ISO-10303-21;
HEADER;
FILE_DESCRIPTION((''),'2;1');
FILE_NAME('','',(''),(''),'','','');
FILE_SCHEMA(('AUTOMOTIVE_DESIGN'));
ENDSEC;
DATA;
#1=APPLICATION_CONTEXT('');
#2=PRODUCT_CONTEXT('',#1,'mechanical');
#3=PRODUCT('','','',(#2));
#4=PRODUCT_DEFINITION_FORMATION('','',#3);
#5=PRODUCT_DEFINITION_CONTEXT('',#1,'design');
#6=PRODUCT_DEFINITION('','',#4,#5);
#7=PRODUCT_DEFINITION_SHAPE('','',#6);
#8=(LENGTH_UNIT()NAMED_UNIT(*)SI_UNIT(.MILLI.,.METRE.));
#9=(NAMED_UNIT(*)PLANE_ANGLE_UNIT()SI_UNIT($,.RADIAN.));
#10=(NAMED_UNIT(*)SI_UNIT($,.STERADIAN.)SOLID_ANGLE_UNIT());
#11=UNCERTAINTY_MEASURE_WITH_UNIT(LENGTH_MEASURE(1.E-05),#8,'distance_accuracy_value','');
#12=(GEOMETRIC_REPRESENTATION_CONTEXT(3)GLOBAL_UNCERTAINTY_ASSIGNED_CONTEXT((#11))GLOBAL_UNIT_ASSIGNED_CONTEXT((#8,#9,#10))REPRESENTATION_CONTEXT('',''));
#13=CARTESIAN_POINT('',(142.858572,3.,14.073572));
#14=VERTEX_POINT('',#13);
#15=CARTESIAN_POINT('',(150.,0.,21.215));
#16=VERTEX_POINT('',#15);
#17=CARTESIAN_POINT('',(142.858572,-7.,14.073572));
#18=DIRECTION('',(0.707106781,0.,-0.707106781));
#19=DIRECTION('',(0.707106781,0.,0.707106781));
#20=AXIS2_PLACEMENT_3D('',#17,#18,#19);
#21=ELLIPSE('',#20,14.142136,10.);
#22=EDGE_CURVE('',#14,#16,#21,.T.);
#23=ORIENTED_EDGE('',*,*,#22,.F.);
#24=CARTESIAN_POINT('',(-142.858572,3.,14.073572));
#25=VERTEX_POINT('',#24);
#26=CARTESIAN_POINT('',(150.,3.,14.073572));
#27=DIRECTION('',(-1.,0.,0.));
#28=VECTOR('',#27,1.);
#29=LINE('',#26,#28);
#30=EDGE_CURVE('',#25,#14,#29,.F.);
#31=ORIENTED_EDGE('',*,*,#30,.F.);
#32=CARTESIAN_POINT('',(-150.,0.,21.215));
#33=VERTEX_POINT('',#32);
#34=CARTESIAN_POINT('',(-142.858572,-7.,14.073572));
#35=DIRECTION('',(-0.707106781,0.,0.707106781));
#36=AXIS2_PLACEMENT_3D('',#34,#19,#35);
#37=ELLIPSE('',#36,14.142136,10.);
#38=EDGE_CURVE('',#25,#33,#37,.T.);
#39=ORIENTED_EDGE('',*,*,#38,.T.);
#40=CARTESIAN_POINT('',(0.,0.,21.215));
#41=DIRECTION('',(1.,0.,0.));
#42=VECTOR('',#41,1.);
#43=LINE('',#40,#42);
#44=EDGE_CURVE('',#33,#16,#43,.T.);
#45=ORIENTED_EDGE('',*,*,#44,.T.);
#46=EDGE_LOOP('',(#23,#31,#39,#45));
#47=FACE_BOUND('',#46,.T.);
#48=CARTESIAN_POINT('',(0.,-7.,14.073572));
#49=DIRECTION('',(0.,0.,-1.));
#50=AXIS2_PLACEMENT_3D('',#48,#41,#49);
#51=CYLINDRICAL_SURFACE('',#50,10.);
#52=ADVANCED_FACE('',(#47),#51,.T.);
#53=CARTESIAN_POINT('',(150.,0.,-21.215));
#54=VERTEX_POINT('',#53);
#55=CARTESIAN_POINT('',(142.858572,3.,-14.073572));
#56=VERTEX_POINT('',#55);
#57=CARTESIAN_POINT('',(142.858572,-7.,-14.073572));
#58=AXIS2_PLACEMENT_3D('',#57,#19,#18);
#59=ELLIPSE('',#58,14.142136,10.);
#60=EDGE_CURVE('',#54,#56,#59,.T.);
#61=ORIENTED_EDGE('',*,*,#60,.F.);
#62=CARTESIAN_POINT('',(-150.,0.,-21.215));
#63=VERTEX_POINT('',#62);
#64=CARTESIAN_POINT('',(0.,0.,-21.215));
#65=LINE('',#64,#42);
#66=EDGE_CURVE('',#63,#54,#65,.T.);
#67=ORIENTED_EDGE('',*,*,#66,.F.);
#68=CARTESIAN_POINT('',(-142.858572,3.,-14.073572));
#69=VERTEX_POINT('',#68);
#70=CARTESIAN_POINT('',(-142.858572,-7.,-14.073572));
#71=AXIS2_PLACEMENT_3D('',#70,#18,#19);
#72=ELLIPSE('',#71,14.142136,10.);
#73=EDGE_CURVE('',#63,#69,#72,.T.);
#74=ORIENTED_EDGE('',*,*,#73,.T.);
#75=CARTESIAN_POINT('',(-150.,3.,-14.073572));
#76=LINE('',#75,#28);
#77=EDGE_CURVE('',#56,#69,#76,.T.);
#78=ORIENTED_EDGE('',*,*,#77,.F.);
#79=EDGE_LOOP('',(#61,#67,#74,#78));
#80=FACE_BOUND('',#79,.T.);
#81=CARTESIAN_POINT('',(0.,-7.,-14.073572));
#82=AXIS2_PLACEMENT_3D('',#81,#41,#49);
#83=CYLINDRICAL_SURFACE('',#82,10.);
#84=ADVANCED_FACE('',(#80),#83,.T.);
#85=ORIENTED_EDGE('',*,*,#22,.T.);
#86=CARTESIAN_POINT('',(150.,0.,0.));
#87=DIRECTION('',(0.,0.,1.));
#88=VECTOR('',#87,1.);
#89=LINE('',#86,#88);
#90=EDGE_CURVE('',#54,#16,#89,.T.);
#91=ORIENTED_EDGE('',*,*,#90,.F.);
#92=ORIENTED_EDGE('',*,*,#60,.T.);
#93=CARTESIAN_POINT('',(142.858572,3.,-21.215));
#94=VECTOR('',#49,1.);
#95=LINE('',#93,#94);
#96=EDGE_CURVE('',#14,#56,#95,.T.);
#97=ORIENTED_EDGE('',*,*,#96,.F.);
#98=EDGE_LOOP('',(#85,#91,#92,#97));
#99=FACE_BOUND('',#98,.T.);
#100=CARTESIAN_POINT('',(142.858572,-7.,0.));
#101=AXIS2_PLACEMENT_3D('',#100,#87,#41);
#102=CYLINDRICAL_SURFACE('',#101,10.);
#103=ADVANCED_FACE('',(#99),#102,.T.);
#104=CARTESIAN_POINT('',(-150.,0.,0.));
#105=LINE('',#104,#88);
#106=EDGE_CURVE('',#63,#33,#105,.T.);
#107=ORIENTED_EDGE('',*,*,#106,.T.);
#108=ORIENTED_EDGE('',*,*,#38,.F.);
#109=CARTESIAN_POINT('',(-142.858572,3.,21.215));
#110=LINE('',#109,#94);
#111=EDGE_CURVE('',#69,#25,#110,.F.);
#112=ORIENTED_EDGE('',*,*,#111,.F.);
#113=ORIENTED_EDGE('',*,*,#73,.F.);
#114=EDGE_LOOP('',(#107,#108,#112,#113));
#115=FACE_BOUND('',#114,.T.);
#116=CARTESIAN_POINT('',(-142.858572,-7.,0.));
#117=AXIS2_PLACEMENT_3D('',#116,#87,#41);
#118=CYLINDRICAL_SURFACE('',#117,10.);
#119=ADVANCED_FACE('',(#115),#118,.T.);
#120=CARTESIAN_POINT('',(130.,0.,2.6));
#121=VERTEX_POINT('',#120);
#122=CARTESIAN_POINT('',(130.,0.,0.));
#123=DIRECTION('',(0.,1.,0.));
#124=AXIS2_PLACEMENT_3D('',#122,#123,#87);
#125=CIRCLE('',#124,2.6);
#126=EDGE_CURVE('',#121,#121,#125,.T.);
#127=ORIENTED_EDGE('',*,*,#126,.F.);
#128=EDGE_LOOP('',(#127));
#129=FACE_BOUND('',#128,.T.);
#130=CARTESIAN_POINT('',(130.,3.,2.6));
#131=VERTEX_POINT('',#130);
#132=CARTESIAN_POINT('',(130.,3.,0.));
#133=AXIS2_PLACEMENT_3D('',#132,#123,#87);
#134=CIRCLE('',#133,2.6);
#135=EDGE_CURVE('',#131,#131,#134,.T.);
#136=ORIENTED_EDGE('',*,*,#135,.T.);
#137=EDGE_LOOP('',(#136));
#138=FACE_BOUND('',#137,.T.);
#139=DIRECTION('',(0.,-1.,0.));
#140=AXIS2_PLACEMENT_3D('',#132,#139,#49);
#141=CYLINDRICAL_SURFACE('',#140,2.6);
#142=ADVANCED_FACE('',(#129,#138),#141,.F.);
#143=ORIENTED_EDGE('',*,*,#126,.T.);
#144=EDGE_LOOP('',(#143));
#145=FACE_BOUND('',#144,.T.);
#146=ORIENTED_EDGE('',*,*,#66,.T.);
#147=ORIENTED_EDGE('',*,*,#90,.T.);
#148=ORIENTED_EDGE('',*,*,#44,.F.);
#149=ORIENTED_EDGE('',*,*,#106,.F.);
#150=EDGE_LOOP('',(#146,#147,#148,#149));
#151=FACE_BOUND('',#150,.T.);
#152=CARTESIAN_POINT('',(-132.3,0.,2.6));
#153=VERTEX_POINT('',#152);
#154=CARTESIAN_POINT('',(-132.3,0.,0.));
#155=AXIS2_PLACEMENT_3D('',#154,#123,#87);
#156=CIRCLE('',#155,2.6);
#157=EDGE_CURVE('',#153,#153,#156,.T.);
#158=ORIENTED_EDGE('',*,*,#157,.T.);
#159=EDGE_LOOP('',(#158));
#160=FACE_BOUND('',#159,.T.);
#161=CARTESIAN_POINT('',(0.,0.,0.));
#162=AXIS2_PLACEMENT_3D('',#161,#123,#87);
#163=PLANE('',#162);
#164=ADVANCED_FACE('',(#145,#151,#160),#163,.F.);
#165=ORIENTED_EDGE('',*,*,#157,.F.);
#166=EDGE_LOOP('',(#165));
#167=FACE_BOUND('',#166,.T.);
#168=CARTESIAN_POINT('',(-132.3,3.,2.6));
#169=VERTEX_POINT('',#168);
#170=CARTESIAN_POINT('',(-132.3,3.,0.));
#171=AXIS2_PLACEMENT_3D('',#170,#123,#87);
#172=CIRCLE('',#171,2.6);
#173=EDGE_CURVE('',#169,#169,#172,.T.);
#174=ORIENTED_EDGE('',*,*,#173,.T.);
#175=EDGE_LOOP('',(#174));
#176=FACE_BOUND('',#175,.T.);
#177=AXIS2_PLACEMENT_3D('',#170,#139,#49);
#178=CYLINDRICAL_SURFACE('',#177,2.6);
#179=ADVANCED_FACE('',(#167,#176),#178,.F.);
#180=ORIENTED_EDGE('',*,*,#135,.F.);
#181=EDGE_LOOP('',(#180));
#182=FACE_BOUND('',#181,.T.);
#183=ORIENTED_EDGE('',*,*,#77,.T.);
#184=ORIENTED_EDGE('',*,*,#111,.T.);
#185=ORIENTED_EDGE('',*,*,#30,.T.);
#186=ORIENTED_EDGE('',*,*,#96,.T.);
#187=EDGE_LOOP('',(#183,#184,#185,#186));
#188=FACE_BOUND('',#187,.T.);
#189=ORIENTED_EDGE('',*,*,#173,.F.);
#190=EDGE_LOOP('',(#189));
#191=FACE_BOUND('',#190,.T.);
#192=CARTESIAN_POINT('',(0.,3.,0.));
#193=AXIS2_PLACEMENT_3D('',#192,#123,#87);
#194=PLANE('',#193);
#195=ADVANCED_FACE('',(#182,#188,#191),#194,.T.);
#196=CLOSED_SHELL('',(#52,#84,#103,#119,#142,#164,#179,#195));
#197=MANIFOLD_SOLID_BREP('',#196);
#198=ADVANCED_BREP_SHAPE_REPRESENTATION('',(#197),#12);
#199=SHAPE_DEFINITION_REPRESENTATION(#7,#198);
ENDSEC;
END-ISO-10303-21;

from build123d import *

# Parameters (mm, degrees)
SKETCH_1_W      = 21
SKETCH_1_H      = 42.43
SKETCH_1_R      = 2.6
EXTRUDE_1_DEPTH = 3
FILLET_1_R      = 10


with BuildPart() as part:
    # 草图1 → 凸台-拉伸1 (new body)
    # profile 1 of 3: a face of its own
    with BuildSketch(Plane(origin=(0, 0, 0), x_dir=(1, 0, 0), z_dir=(0, 1, 0))):
        with Locations((-139.5, 0)):
            Rectangle(SKETCH_1_W, SKETCH_1_H)
        with Locations(Location((-132.3, 0, 0), (0, 0, 270))):
            Circle(SKETCH_1_R, mode=Mode.SUBTRACT)
    # profile 2 of 3: a face of its own
    with BuildSketch(Plane(origin=(0, 0, 0), x_dir=(1, 0, 0), z_dir=(0, 1, 0))):
        with BuildLine():
            Line((129, 21.215), (-129, 21.215))
            Line((-129, 21.215), (-129, -21.215))
            Line((-129, -21.215), (129, -21.215))
            Line((129, -21.215), (129, -2.4))
            ThreePointArc((129, -2.4), (127.4, 0), (129, 2.4))
            Line((129, 2.4), (129, 21.215))
        make_face()
    # profile 3 of 3: a face of its own
    with BuildSketch(Plane(origin=(0, 0, 0), x_dir=(1, 0, 0), z_dir=(0, 1, 0))):
        with BuildLine():
            Line((150, 21.215), (129, 21.215))
            Line((129, 21.215), (129, 2.4))
            ThreePointArc((129, 2.4), (131.44222051, 2.163330765), (132.6, 0))
            ThreePointArc((132.6, 0), (131.44222051, -2.163330765), (129, -2.4))
            Line((129, -2.4), (129, -21.215))
            Line((129, -21.215), (150, -21.215))
            Line((150, -21.215), (150, 21.215))
        make_face()
    extrude(amount=EXTRUDE_1_DEPTH)

    # 圆角1
    # the kernel refuses this fillet: 10 mm, written as the material it takes off along each edge
    with BuildSketch(Plane(origin=(150, 3, 39.068571071), x_dir=(-1, 0, 0), z_dir=(0, 0, -1)), Plane(origin=(-150, 3, -39.068571071), x_dir=(1, 0, 0), z_dir=(0, 0, 1))) as fillet_1_piece_1:
        with BuildLine():
            CenterArc((7.141428429, -10), FILLET_1_R, 90, 45.572995999)
            Line((0, -3), (-0.142828569, -2.86))
            ThreePointArc((-0.142828569, -2.86), (-0.2, -1.5), (-0.2, 0))
            Line((-0.2, 0), (0, 0.2))
            Line((0, 0.2), (7.141428429, 0.2))
            Line((7.141428429, 0.2), (7.141428429, 0))
        make_face()
    extrude(amount=78.137142143, mode=Mode.SUBTRACT)
    with BuildSketch(Plane(origin=(-167.853571071, 3, 21.215), x_dir=(0, 0, -1), z_dir=(1, 0, 0))) as fillet_1_piece_2:
        with BuildLine():
            CenterArc((7.141428429, -10), FILLET_1_R, 90, 45.572995999)
            Line((0, -3), (-0.142828569, -2.86))
            ThreePointArc((-0.142828569, -2.86), (-0.2, -1.5), (-0.2, 0))
            Line((-0.2, 0), (0, 0.2))
            Line((0, 0.2), (7.141428429, 0.2))
            Line((7.141428429, 0.2), (7.141428429, 0))
        make_face()
    extrude(amount=335.707142143, mode=Mode.SUBTRACT)
    with BuildSketch(Plane(origin=(-167.853571071, 3, -21.215), x_dir=(0, -1, 0), z_dir=(1, 0, 0))) as fillet_1_piece_3:
        with BuildLine():
            CenterArc((10, -7.141428429), FILLET_1_R, 134.427004001, 45.572995999)
            Line((0, -7.141428429), (-0.2, -7.141428429))
            Line((-0.2, -7.141428429), (-0.2, 0))
            Line((-0.2, 0), (0, 0.2))
            ThreePointArc((0, 0.2), (1.5, 0.2), (2.86, 0.142828569))
            Line((2.86, 0.142828569), (3, 0))
        make_face()
    extrude(amount=335.707142143, mode=Mode.SUBTRACT)


solid = part.part
